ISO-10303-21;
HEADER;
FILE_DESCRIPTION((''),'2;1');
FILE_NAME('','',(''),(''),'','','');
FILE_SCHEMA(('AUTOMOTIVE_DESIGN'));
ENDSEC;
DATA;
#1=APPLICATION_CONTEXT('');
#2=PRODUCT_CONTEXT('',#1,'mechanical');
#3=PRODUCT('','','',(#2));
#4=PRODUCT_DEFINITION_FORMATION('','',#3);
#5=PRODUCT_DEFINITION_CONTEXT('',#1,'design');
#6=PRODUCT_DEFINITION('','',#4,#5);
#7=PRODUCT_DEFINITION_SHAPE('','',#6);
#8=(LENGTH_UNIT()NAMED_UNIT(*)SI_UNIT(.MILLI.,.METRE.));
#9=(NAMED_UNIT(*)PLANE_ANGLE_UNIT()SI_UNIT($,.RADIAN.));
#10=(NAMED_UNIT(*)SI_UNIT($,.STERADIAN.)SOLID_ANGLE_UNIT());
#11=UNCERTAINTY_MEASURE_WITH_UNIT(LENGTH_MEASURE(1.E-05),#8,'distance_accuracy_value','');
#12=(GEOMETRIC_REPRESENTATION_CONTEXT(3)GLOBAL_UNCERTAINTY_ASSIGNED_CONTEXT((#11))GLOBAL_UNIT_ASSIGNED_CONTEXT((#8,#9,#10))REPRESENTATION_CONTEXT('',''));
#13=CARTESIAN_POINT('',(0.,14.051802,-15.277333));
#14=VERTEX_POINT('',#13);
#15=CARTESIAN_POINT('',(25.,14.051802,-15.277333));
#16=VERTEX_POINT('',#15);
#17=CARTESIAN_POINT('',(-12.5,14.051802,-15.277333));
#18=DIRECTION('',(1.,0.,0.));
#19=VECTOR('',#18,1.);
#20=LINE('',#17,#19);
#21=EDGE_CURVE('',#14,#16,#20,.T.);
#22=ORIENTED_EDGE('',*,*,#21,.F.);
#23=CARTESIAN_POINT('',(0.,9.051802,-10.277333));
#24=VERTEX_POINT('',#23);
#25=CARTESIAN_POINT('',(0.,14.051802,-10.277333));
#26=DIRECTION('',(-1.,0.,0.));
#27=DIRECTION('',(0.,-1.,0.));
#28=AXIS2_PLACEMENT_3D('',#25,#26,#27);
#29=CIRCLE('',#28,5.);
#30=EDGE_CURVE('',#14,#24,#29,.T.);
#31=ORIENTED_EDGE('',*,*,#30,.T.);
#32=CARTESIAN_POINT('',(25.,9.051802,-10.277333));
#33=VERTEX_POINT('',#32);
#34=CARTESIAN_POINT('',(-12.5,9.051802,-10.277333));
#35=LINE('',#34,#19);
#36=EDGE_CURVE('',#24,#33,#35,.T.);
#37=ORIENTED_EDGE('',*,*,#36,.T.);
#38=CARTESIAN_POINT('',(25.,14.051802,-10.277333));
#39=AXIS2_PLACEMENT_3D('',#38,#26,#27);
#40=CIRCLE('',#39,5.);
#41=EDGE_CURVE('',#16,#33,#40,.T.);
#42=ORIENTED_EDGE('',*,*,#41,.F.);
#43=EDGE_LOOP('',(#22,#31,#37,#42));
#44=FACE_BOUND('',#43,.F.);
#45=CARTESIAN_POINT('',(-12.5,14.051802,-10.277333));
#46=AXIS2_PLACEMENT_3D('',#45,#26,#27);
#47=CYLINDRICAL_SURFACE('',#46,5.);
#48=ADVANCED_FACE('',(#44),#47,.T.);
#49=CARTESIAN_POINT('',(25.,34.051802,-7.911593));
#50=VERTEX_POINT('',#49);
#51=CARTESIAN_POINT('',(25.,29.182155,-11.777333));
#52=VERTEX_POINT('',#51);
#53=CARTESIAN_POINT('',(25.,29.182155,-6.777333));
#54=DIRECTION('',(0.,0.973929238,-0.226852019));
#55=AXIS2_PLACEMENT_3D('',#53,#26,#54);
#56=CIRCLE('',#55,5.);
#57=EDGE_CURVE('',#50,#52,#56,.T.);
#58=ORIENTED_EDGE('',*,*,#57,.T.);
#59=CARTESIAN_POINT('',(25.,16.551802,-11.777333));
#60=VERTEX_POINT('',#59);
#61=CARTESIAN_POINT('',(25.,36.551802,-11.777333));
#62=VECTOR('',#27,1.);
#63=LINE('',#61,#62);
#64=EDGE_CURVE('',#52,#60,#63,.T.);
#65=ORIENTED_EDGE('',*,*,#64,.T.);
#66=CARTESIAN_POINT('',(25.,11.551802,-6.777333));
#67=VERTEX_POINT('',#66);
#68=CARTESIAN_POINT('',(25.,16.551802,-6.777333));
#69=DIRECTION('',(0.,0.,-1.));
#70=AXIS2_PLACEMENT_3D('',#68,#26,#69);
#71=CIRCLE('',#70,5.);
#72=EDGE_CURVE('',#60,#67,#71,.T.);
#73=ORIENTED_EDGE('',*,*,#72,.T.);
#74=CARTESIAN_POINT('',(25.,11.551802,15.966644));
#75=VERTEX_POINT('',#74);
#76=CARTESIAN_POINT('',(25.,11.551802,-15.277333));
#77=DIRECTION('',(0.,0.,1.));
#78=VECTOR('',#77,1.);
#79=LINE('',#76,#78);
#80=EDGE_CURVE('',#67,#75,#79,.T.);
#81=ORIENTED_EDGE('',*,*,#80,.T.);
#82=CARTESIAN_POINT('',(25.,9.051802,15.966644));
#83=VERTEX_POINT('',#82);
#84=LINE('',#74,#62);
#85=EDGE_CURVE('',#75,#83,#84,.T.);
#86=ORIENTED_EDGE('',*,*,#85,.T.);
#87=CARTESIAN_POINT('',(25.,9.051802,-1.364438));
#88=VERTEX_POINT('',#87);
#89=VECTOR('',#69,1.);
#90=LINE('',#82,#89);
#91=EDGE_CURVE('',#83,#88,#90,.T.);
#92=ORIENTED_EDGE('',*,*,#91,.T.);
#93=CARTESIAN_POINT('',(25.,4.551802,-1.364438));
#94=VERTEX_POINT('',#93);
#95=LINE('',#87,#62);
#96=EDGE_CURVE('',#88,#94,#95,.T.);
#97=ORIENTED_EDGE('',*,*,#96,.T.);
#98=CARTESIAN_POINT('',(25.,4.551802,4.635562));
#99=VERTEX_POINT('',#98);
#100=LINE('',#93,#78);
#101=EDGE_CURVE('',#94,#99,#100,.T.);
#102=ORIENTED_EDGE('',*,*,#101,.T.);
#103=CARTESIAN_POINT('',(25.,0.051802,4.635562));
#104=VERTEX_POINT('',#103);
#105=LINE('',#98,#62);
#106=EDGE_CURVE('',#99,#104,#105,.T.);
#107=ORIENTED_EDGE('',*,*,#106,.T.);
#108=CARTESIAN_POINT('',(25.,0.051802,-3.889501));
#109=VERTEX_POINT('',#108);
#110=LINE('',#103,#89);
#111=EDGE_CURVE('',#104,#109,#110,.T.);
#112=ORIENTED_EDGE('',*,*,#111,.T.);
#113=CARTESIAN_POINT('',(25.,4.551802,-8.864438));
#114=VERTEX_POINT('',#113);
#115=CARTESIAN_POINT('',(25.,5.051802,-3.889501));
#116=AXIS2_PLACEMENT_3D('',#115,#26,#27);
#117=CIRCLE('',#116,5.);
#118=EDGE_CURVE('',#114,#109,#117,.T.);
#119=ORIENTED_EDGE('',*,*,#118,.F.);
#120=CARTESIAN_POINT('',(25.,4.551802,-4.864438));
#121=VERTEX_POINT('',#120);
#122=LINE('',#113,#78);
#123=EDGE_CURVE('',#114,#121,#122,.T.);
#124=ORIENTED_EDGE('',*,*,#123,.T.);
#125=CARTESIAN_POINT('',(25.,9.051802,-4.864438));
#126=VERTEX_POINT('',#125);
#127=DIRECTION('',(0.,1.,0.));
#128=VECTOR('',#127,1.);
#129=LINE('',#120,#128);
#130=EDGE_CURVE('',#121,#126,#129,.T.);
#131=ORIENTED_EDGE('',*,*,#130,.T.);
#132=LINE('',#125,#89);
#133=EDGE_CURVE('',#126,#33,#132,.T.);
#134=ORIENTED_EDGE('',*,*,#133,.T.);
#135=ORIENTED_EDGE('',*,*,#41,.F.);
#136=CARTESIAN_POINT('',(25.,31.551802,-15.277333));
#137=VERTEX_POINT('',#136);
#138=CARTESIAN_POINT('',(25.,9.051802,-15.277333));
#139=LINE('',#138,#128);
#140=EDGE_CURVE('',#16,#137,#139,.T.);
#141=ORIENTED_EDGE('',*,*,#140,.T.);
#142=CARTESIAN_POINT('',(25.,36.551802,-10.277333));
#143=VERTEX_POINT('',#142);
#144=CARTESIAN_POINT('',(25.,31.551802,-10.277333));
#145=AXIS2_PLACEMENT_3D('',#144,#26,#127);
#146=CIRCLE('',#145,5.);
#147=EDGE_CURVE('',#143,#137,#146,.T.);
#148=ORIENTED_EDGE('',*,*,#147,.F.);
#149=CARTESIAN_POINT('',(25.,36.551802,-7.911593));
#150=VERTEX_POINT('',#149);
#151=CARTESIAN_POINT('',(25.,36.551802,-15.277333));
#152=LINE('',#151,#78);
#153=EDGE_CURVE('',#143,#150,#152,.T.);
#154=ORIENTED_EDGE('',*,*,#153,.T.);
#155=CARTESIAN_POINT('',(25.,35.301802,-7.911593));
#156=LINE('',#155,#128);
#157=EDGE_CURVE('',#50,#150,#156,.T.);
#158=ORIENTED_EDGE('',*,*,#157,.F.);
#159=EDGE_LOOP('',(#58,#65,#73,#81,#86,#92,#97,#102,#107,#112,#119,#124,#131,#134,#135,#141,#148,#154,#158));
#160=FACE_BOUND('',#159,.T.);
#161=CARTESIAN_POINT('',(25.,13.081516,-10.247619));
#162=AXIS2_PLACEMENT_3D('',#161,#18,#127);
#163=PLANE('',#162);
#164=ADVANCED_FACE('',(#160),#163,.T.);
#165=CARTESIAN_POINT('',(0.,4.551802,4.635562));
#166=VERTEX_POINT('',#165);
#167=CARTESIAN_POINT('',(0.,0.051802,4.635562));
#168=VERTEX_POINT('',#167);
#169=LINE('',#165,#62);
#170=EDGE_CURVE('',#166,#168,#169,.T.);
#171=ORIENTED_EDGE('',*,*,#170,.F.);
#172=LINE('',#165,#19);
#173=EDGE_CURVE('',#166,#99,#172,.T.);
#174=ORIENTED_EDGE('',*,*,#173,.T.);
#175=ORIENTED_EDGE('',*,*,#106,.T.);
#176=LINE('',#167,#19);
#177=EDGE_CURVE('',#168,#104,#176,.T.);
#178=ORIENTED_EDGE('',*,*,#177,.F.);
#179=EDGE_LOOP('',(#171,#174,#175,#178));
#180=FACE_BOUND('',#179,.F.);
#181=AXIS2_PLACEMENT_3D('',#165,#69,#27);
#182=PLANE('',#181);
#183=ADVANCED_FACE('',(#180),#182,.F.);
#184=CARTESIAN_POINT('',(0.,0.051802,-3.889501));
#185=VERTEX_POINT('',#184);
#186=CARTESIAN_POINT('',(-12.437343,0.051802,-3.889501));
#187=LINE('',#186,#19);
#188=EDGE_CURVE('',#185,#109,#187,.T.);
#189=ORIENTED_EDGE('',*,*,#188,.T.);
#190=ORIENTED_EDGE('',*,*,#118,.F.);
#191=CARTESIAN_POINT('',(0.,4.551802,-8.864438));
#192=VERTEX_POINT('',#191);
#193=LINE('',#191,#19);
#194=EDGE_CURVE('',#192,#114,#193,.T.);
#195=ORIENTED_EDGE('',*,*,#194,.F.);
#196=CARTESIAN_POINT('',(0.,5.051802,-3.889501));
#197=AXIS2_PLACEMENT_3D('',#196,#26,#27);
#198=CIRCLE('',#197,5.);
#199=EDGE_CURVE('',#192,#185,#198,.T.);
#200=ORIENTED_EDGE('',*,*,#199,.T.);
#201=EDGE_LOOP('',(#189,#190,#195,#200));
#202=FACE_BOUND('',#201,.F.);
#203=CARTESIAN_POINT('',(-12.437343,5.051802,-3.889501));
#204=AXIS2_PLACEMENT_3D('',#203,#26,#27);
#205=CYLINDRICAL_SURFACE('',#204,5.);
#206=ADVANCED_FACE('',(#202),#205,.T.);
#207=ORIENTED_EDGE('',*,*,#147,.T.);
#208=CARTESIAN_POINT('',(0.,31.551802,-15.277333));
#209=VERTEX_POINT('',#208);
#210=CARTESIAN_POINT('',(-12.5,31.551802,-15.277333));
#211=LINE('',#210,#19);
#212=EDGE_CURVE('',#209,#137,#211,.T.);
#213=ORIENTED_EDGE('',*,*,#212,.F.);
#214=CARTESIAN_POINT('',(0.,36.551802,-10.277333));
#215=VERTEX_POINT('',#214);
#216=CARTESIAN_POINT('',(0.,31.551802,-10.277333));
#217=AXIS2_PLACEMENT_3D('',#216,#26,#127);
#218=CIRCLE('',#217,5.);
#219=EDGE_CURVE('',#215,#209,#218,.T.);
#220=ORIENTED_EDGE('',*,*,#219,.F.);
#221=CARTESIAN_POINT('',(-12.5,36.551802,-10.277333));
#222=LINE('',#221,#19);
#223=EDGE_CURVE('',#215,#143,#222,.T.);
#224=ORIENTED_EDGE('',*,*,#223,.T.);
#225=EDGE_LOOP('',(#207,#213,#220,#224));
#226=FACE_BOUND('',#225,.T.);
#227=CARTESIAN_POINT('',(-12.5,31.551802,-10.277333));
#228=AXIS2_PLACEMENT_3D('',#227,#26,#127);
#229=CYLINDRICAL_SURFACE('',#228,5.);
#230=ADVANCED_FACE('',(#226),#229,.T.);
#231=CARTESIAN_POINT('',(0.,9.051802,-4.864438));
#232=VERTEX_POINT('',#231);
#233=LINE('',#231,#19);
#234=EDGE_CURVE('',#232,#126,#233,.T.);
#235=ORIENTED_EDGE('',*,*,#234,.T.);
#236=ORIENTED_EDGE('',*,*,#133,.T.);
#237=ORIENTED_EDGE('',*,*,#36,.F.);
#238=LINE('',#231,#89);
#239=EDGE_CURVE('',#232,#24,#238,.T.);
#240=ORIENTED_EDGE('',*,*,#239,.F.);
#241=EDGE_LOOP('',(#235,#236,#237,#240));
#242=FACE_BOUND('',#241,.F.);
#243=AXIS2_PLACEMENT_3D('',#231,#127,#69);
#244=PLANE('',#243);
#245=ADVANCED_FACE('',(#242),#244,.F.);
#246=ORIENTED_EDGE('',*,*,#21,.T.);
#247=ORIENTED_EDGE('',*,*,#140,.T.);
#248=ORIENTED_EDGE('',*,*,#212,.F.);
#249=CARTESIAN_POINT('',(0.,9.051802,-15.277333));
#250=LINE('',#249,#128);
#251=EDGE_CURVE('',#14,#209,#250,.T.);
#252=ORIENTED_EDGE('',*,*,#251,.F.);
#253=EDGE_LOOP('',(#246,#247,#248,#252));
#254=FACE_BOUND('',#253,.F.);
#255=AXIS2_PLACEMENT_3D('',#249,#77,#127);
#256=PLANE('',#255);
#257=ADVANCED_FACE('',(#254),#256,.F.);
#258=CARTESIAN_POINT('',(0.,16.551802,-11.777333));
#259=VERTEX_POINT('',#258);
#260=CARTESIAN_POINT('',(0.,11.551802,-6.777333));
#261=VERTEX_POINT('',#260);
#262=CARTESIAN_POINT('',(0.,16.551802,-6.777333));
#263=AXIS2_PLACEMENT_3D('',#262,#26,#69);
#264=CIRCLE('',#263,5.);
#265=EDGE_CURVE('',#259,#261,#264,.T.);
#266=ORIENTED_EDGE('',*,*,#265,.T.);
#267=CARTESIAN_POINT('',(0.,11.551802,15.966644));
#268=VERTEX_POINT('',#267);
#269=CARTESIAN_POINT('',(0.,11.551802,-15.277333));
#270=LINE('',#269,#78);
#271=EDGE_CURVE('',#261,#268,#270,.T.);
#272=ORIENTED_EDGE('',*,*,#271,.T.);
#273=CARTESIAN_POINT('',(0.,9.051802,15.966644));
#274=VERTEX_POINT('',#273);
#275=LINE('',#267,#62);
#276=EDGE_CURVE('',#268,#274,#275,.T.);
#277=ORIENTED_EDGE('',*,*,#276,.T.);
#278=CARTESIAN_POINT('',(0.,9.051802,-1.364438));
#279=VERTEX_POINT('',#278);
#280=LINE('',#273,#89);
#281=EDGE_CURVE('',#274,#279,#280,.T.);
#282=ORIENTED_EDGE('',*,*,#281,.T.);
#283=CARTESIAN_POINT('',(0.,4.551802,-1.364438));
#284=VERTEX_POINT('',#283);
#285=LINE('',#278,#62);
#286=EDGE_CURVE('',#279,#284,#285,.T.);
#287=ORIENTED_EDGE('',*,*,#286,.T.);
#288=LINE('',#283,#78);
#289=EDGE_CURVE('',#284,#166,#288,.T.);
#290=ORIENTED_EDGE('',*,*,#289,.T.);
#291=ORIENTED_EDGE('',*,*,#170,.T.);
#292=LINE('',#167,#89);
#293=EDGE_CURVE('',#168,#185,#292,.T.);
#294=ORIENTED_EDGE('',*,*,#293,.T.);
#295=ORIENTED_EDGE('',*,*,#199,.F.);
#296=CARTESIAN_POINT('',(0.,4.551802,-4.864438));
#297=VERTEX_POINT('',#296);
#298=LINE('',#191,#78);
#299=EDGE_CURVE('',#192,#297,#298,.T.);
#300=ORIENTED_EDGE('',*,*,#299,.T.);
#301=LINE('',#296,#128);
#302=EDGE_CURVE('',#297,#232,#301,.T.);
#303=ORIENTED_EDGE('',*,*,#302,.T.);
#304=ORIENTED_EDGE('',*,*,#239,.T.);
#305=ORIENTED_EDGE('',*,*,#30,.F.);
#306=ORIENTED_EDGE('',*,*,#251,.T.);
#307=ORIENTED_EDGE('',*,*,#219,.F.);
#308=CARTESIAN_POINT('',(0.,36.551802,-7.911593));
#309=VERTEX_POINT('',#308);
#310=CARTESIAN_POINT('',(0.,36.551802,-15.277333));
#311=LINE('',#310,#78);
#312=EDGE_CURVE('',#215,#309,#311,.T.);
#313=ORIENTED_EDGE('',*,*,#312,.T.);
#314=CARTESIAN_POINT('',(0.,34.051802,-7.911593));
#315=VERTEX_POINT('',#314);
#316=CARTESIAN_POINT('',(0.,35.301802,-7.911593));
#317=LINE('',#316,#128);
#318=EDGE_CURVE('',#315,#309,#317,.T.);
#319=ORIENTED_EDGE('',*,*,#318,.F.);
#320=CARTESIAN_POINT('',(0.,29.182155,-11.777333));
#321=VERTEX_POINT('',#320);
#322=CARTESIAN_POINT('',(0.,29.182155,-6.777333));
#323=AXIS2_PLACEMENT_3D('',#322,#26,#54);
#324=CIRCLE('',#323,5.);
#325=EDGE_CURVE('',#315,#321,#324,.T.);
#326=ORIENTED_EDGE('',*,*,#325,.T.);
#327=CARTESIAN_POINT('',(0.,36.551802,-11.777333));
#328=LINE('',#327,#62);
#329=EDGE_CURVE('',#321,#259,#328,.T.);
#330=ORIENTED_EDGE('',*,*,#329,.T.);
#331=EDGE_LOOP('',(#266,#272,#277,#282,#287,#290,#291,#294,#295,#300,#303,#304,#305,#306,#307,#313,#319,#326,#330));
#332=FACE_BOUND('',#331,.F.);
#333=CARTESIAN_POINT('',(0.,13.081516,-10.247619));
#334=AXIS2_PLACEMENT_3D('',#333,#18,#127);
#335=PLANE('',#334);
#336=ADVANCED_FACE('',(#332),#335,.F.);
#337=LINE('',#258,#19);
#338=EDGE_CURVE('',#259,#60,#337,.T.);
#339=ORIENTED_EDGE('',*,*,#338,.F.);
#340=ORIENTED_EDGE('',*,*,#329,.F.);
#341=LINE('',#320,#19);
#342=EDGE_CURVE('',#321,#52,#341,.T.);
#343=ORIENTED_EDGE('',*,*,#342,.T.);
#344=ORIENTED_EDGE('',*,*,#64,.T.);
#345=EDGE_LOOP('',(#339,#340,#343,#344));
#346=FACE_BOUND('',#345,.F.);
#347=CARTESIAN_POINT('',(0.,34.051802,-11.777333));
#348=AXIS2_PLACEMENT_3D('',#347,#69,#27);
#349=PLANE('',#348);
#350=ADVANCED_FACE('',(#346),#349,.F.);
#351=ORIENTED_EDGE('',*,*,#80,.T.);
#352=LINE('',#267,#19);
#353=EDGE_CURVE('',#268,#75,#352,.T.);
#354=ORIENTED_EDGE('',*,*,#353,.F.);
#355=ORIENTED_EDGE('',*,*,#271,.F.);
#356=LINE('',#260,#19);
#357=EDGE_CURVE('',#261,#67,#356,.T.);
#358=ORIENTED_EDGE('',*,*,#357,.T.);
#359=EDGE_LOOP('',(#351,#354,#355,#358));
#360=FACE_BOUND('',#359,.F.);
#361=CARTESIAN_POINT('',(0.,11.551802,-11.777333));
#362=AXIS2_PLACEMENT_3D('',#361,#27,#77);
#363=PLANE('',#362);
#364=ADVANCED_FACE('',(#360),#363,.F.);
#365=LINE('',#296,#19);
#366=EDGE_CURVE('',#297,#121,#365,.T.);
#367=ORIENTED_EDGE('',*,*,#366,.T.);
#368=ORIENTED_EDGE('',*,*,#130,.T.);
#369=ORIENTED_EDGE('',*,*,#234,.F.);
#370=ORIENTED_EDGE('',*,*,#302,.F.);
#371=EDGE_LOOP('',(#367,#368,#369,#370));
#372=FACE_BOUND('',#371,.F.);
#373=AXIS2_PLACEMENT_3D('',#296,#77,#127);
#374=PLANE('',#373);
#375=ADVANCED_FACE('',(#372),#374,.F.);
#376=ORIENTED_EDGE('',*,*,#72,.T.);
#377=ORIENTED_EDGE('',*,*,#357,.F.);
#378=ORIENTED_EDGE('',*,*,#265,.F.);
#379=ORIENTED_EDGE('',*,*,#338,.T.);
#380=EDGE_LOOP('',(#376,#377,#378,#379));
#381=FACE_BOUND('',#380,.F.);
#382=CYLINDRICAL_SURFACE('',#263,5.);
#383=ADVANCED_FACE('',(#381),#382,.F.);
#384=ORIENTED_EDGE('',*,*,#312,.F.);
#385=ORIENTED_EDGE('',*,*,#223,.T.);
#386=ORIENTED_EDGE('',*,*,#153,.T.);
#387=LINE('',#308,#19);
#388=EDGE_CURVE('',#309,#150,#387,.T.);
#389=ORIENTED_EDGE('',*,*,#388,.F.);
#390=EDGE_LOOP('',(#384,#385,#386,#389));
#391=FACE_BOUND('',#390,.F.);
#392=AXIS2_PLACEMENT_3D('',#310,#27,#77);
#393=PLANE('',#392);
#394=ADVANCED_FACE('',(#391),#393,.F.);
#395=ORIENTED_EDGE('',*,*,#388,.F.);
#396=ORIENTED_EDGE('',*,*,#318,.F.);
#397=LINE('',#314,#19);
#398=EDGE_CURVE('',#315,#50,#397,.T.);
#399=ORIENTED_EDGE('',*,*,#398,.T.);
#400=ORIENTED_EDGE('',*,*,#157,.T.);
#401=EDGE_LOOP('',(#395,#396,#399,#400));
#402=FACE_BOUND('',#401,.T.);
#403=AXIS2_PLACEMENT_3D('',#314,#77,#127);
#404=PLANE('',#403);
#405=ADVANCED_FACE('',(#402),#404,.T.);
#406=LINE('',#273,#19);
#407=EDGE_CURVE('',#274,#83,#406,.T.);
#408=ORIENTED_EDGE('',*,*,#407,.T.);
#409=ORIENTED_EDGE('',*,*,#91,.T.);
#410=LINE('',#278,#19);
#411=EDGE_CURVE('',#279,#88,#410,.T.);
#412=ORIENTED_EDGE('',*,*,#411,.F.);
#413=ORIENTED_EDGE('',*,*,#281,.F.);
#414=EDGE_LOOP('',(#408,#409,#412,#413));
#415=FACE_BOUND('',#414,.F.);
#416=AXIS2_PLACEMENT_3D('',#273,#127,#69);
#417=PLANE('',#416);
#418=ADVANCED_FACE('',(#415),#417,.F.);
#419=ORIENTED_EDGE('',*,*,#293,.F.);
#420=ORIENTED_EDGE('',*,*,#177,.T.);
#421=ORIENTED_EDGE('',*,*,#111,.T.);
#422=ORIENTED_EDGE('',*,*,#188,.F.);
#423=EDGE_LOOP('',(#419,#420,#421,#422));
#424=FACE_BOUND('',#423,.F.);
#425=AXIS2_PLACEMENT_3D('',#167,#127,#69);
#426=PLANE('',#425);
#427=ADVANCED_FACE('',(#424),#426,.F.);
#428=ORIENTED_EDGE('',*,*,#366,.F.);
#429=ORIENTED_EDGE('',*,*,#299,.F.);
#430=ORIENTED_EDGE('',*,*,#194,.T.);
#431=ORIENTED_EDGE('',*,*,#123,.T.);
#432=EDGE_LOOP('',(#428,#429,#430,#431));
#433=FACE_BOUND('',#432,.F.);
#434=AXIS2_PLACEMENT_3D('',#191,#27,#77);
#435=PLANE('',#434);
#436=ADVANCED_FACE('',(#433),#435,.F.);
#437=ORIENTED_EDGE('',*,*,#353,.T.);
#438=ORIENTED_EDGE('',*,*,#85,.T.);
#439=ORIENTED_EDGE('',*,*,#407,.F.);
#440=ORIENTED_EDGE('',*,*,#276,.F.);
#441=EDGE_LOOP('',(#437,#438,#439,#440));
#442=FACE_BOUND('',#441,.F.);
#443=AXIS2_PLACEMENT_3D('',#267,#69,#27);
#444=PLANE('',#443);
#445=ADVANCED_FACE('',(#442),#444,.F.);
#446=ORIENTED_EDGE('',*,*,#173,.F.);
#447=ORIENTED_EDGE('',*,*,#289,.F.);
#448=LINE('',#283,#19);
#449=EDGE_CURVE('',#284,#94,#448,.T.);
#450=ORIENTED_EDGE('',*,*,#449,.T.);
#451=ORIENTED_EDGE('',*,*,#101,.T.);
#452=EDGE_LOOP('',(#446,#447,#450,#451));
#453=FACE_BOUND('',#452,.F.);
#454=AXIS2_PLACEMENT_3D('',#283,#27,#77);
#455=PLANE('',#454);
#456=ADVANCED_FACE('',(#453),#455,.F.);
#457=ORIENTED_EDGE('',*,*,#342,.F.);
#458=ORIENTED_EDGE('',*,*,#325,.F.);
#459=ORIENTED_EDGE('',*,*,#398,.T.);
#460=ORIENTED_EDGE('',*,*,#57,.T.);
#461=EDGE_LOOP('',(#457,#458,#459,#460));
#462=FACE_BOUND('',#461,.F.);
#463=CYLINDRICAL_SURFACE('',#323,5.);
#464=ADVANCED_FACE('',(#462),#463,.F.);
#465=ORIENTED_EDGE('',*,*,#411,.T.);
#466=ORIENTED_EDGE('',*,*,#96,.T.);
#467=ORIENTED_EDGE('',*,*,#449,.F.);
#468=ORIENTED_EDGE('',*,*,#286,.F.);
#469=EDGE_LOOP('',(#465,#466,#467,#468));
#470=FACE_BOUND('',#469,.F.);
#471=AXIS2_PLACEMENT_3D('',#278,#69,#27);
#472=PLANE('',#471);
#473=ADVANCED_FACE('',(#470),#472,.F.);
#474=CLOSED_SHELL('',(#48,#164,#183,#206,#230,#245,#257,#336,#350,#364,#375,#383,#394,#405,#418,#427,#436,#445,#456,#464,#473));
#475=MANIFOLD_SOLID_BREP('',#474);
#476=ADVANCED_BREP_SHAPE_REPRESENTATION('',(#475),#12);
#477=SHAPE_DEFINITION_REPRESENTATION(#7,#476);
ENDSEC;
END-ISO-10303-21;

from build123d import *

# Parameters (mm, degrees)
F0_W        = 2.5
F0_H        = 3.8657399043
F1_DEPTH    = 25
F2_T1_DEPTH = 25
F2_T3_DEPTH = 25
F2_T5_DEPTH = 50
F2_T7_DEPTH = 50
F3_T1_DEPTH = 49.8746859277


# Not quite as in the source:
# - a fillet or chamfer that OpenCascade refuses, or shapes differently, is made with other operations: its cross-section is extruded or revolved along the edge and cut away or added


with BuildPart() as f1:
    # F0 (on Right) → F1 (new body)
    with BuildSketch(Plane.YZ):
        Polygon((4.5518016368, 4.6355622155), (0.0518016368, 4.6355622155), (0.0518016368, -8.8644377845), (4.5518016368, -8.8644377845), (4.5518016368, -4.8644377845), (9.0518016368, -4.8644377845), (9.0518016368, -15.2773326263), (11.5518016368, -15.2773326263), (11.5518016368, -11.7773326263), (11.5518016368, 15.966644237), (9.0518016368, 15.966644237), (9.0518016368, -1.3644377845), (4.5518016368, -1.3644377845), align=None)
        Polygon((11.5518016368, -11.7773326263), (11.5518016368, -15.2773326263), (36.5518016368, -15.2773326263), (36.5518016368, -11.7773326263), (34.0518016368, -11.7773326263), align=None)
        with Locations((35.3018016368, -9.8444626741)):
            Rectangle(F0_W, F0_H)
    extrude(amount=F1_DEPTH)

    # F2: fillet of radius 5 on 4 edges, made by hand

    # F2_s2 → F2_t1 (join)
    with BuildSketch(Plane.YZ):
        with BuildLine():
            ThreePointArc((34.0518016368, -7.9115927219), (32.2909091759, -10.6934084988), (29.1821554448, -11.7773326263))
            Line((29.1821554448, -11.7773326263), (34.0518016368, -11.7773326263))
            Line((34.0518016368, -11.7773326263), (34.0518016368, -7.9115927219))
        make_face()
    extrude(amount=F2_T1_DEPTH)

    # F2_s4 → F2_t3 (join)
    with BuildSketch(Plane.YZ):
        with BuildLine():
            ThreePointArc((16.5518016368, -11.7773326263), (13.0162677309, -10.3128665322), (11.5518016368, -6.7773326263))
            Line((11.5518016368, -6.7773326263), (11.5518016368, -11.7773326263))
            Line((11.5518016368, -11.7773326263), (16.5518016368, -11.7773326263))
        make_face()
    extrude(amount=F2_T3_DEPTH)

    # F2_s6 → F2_t5 (cut)
    with BuildSketch(Plane.YZ.offset(-12.5)):
        with BuildLine():
            ThreePointArc((9.0518016368, -10.2773326263), (10.5162677309, -13.8128665322), (14.0518016368, -15.2773326263))
            Line((14.0518016368, -15.2773326263), (9.0518016368, -15.2773326263))
            Line((9.0518016368, -15.2773326263), (9.0518016368, -10.2773326263))
        make_face()
    extrude(amount=F2_T5_DEPTH, mode=Mode.SUBTRACT)

    # F2_s8 → F2_t7 (cut)
    with BuildSketch(Plane.YZ.offset(-12.5)):
        with BuildLine():
            ThreePointArc((36.5518016368, -10.2773326263), (35.0873355427, -13.8128665322), (31.5518016368, -15.2773326263))
            Line((31.5518016368, -15.2773326263), (36.5518016368, -15.2773326263))
            Line((36.5518016368, -15.2773326263), (36.5518016368, -10.2773326263))
        make_face()
    extrude(amount=F2_T7_DEPTH, mode=Mode.SUBTRACT)

    # F3: fillet of radius 5 on 1 edges, made by hand

    # F3_s2 → F3_t1 (cut)
    with BuildSketch(Plane.YZ.offset(-12.4373429638)):
        with BuildLine():
            ThreePointArc((0.0518016368, -3.889500599), (1.3437023933, -7.2436025653), (4.5518016368, -8.8644377845))
            Line((4.5518016368, -8.8644377845), (0.0518016368, -8.8644377845))
            Line((0.0518016368, -8.8644377845), (0.0518016368, -3.889500599))
        make_face()
    extrude(amount=F3_T1_DEPTH, mode=Mode.SUBTRACT)


solid = f1.part
